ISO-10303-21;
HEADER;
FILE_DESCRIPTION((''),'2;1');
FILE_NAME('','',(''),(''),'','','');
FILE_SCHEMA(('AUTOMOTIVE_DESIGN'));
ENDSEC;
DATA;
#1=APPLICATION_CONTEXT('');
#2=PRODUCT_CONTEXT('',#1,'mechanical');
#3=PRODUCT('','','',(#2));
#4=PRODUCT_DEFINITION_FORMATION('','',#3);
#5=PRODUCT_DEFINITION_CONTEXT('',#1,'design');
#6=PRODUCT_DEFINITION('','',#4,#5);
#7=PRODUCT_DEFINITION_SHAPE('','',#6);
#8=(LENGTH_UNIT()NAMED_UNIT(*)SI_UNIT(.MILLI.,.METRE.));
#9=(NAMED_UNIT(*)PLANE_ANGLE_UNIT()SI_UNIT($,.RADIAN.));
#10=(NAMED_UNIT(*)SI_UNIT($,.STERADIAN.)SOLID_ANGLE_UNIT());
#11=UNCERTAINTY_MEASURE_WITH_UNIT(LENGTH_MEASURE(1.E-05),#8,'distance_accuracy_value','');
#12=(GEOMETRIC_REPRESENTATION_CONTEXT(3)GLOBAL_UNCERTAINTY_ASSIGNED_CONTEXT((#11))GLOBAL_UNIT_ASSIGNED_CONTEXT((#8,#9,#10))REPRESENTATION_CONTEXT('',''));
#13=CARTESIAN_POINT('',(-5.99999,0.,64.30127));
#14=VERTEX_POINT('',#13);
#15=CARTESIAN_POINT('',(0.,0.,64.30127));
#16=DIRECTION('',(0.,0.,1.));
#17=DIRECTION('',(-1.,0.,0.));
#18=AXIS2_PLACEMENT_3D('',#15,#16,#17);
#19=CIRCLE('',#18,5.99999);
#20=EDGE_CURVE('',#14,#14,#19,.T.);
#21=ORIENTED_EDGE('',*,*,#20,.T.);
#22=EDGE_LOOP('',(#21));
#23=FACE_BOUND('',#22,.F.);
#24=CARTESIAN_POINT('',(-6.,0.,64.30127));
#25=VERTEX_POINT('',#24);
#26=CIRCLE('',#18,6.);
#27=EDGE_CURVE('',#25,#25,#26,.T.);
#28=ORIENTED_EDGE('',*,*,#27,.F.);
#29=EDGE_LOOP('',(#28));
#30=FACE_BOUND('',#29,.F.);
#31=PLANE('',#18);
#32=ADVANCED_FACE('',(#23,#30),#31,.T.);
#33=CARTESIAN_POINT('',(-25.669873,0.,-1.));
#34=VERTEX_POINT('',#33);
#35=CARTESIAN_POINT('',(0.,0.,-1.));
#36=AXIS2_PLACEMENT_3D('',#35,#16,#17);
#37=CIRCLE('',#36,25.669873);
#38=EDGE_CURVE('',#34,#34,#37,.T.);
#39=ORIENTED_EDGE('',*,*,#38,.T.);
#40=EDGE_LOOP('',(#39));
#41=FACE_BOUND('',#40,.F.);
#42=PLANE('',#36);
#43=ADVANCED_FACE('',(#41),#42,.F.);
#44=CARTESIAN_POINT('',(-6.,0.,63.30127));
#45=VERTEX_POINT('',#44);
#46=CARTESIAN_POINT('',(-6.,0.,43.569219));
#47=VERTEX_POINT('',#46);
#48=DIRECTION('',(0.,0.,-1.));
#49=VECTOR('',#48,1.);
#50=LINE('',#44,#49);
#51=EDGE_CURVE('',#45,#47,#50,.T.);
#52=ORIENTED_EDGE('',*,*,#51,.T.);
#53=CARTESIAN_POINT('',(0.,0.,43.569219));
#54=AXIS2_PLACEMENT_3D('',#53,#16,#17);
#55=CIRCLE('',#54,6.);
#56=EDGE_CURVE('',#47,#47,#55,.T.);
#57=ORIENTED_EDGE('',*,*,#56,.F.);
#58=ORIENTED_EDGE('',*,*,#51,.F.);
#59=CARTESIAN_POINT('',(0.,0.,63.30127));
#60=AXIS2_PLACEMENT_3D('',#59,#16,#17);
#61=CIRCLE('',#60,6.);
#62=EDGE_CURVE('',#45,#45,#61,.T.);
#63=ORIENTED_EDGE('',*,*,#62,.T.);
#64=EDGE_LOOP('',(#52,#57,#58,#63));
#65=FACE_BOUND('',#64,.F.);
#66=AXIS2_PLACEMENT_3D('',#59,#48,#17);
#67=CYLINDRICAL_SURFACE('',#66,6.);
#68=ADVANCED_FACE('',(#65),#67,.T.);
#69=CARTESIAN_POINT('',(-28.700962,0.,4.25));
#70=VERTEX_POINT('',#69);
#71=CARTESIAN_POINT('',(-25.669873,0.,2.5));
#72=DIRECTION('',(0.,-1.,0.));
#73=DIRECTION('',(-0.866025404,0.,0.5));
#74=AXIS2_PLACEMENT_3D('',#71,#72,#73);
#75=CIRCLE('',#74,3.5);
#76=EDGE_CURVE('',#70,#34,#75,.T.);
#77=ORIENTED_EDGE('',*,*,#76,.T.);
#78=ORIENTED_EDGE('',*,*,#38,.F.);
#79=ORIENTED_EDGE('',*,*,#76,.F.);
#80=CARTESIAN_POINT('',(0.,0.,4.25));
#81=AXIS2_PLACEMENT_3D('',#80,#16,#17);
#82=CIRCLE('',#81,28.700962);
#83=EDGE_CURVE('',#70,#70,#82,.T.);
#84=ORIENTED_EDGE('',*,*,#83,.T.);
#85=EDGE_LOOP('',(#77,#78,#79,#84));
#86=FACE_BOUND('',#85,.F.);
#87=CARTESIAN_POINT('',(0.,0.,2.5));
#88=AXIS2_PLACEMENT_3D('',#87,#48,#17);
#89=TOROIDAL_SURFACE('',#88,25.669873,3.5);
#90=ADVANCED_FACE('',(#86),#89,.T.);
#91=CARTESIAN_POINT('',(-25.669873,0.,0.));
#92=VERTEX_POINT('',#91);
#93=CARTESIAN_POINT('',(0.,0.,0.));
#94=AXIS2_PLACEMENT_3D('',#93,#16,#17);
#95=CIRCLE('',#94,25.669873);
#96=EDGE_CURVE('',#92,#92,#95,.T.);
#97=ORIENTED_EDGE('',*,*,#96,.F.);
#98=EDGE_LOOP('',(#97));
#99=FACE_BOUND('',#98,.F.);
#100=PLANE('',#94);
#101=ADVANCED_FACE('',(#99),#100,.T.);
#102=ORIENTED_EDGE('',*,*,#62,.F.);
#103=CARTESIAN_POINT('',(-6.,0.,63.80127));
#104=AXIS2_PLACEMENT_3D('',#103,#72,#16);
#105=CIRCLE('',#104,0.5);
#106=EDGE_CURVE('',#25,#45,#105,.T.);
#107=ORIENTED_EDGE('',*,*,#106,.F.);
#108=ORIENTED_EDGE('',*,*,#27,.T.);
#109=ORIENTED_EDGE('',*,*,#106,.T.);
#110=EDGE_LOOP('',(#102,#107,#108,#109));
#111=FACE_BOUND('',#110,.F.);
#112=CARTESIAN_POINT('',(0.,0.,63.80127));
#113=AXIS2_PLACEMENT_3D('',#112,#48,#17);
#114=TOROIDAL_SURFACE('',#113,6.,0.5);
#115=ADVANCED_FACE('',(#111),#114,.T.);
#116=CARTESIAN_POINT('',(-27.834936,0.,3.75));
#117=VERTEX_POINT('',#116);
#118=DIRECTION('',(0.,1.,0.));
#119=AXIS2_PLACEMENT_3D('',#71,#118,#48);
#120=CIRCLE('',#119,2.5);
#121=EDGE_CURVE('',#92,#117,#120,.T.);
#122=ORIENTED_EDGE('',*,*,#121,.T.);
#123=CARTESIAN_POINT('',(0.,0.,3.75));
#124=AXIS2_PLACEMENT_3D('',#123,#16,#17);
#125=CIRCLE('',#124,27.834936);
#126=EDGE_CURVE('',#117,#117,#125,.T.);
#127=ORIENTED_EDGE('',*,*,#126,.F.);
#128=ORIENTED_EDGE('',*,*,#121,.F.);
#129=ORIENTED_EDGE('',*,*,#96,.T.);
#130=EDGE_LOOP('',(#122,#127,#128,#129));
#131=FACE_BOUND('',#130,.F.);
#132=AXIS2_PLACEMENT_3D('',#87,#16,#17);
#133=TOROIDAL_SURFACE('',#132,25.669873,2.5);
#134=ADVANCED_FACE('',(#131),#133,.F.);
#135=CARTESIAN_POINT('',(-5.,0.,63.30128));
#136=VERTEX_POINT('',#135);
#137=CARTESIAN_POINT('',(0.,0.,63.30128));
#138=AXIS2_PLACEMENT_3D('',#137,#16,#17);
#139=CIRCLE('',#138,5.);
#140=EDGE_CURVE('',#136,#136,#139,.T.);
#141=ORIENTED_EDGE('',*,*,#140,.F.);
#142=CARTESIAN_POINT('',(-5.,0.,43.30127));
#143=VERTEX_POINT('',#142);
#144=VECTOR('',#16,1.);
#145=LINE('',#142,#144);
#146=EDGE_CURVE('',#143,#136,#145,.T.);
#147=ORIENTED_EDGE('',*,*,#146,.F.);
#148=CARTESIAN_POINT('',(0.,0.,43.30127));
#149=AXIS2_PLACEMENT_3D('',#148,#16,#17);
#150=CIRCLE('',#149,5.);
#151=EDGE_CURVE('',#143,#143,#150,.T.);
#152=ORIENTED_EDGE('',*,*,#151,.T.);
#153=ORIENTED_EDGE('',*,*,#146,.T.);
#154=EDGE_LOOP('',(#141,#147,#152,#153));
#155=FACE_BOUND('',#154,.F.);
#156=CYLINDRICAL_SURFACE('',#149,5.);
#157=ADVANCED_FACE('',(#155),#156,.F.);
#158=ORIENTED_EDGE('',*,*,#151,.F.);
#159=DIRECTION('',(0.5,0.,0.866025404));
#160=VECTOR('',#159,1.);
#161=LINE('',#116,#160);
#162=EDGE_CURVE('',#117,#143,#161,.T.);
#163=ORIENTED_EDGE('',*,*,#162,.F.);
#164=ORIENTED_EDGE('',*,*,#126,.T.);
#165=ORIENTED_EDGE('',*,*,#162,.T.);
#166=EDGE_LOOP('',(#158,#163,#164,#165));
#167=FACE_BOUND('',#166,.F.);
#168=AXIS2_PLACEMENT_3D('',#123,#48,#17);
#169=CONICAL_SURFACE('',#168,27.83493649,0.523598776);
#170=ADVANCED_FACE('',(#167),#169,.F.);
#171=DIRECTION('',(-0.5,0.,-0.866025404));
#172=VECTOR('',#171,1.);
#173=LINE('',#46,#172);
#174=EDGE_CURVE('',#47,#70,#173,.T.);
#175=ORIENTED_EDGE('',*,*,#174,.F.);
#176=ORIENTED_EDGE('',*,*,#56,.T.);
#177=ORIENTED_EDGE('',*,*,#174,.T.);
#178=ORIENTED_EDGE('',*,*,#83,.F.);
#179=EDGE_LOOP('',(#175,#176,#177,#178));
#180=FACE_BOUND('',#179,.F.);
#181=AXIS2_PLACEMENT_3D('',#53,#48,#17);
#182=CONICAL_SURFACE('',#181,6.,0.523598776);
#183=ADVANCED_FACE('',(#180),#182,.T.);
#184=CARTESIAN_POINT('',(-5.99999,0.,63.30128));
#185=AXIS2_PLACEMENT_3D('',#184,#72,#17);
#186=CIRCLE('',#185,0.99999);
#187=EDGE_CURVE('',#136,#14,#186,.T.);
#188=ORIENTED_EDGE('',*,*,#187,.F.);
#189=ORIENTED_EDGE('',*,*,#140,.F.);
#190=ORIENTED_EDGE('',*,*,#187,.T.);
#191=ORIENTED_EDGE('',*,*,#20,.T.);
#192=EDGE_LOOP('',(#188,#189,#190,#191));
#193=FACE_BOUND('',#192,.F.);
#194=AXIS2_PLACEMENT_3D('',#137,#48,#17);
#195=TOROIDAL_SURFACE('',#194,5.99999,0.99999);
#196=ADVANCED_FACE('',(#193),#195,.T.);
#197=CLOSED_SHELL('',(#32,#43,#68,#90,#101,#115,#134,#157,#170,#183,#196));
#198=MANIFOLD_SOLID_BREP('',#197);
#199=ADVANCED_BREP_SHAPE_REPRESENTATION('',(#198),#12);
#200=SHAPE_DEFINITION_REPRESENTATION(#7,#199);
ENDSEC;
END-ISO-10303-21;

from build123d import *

# Parameters (mm, degrees)
F2_R = 0.99999


# Not quite as in the source:
# - a fillet or chamfer is up to 0.001 mm smaller than in the source, because OpenCascade refuses the exact size


with BuildPart() as f1:
    # F0 (on Front) → F1 (revolve)
    with BuildSketch(Plane.XZ):
        with BuildLine():
            Line((-5, 43.3012701892), (-5, 63.3012701892))
            Line((-5, 63.3012701892), (-5, 64.3012701892))
            Line((-5, 64.3012701892), (-6, 64.3012701892))
            ThreePointArc((-6, 64.3012701892), (-6.5, 63.8012701892), (-6, 63.3012701892))
            Line((-6, 63.3012701892), (-6, 43.5692193817))
            Line((-6, 43.5692193817), (-28.7009618943, 4.25))
            ThreePointArc((-28.7009618943, 4.25), (-28.7009618943, 0.75), (-25.6698729811, -1))
            Line((-25.6698729811, -1), (0, -1))
            Line((0, -1), (0, 0))
            Line((0, 0), (-25.6698729811, 0))
            ThreePointArc((-25.6698729811, 0), (-27.8349364905, 1.25), (-27.8349364905, 3.75))
            Line((-27.8349364905, 3.75), (-5, 43.3012701892))
        make_face()
    revolve(axis=Axis((0, 0, 31.6506350946), (0, 0, 1)))

    # F2 (radius 1 in the source; OpenCascade refuses exactly that, so slightly less here)
    f2_edges = [f1.edges().sort_by_distance(p)[0] for p in [
        (5, 0, 64.30127),
    ]]
    fillet(f2_edges, radius=F2_R)


solid = f1.part
